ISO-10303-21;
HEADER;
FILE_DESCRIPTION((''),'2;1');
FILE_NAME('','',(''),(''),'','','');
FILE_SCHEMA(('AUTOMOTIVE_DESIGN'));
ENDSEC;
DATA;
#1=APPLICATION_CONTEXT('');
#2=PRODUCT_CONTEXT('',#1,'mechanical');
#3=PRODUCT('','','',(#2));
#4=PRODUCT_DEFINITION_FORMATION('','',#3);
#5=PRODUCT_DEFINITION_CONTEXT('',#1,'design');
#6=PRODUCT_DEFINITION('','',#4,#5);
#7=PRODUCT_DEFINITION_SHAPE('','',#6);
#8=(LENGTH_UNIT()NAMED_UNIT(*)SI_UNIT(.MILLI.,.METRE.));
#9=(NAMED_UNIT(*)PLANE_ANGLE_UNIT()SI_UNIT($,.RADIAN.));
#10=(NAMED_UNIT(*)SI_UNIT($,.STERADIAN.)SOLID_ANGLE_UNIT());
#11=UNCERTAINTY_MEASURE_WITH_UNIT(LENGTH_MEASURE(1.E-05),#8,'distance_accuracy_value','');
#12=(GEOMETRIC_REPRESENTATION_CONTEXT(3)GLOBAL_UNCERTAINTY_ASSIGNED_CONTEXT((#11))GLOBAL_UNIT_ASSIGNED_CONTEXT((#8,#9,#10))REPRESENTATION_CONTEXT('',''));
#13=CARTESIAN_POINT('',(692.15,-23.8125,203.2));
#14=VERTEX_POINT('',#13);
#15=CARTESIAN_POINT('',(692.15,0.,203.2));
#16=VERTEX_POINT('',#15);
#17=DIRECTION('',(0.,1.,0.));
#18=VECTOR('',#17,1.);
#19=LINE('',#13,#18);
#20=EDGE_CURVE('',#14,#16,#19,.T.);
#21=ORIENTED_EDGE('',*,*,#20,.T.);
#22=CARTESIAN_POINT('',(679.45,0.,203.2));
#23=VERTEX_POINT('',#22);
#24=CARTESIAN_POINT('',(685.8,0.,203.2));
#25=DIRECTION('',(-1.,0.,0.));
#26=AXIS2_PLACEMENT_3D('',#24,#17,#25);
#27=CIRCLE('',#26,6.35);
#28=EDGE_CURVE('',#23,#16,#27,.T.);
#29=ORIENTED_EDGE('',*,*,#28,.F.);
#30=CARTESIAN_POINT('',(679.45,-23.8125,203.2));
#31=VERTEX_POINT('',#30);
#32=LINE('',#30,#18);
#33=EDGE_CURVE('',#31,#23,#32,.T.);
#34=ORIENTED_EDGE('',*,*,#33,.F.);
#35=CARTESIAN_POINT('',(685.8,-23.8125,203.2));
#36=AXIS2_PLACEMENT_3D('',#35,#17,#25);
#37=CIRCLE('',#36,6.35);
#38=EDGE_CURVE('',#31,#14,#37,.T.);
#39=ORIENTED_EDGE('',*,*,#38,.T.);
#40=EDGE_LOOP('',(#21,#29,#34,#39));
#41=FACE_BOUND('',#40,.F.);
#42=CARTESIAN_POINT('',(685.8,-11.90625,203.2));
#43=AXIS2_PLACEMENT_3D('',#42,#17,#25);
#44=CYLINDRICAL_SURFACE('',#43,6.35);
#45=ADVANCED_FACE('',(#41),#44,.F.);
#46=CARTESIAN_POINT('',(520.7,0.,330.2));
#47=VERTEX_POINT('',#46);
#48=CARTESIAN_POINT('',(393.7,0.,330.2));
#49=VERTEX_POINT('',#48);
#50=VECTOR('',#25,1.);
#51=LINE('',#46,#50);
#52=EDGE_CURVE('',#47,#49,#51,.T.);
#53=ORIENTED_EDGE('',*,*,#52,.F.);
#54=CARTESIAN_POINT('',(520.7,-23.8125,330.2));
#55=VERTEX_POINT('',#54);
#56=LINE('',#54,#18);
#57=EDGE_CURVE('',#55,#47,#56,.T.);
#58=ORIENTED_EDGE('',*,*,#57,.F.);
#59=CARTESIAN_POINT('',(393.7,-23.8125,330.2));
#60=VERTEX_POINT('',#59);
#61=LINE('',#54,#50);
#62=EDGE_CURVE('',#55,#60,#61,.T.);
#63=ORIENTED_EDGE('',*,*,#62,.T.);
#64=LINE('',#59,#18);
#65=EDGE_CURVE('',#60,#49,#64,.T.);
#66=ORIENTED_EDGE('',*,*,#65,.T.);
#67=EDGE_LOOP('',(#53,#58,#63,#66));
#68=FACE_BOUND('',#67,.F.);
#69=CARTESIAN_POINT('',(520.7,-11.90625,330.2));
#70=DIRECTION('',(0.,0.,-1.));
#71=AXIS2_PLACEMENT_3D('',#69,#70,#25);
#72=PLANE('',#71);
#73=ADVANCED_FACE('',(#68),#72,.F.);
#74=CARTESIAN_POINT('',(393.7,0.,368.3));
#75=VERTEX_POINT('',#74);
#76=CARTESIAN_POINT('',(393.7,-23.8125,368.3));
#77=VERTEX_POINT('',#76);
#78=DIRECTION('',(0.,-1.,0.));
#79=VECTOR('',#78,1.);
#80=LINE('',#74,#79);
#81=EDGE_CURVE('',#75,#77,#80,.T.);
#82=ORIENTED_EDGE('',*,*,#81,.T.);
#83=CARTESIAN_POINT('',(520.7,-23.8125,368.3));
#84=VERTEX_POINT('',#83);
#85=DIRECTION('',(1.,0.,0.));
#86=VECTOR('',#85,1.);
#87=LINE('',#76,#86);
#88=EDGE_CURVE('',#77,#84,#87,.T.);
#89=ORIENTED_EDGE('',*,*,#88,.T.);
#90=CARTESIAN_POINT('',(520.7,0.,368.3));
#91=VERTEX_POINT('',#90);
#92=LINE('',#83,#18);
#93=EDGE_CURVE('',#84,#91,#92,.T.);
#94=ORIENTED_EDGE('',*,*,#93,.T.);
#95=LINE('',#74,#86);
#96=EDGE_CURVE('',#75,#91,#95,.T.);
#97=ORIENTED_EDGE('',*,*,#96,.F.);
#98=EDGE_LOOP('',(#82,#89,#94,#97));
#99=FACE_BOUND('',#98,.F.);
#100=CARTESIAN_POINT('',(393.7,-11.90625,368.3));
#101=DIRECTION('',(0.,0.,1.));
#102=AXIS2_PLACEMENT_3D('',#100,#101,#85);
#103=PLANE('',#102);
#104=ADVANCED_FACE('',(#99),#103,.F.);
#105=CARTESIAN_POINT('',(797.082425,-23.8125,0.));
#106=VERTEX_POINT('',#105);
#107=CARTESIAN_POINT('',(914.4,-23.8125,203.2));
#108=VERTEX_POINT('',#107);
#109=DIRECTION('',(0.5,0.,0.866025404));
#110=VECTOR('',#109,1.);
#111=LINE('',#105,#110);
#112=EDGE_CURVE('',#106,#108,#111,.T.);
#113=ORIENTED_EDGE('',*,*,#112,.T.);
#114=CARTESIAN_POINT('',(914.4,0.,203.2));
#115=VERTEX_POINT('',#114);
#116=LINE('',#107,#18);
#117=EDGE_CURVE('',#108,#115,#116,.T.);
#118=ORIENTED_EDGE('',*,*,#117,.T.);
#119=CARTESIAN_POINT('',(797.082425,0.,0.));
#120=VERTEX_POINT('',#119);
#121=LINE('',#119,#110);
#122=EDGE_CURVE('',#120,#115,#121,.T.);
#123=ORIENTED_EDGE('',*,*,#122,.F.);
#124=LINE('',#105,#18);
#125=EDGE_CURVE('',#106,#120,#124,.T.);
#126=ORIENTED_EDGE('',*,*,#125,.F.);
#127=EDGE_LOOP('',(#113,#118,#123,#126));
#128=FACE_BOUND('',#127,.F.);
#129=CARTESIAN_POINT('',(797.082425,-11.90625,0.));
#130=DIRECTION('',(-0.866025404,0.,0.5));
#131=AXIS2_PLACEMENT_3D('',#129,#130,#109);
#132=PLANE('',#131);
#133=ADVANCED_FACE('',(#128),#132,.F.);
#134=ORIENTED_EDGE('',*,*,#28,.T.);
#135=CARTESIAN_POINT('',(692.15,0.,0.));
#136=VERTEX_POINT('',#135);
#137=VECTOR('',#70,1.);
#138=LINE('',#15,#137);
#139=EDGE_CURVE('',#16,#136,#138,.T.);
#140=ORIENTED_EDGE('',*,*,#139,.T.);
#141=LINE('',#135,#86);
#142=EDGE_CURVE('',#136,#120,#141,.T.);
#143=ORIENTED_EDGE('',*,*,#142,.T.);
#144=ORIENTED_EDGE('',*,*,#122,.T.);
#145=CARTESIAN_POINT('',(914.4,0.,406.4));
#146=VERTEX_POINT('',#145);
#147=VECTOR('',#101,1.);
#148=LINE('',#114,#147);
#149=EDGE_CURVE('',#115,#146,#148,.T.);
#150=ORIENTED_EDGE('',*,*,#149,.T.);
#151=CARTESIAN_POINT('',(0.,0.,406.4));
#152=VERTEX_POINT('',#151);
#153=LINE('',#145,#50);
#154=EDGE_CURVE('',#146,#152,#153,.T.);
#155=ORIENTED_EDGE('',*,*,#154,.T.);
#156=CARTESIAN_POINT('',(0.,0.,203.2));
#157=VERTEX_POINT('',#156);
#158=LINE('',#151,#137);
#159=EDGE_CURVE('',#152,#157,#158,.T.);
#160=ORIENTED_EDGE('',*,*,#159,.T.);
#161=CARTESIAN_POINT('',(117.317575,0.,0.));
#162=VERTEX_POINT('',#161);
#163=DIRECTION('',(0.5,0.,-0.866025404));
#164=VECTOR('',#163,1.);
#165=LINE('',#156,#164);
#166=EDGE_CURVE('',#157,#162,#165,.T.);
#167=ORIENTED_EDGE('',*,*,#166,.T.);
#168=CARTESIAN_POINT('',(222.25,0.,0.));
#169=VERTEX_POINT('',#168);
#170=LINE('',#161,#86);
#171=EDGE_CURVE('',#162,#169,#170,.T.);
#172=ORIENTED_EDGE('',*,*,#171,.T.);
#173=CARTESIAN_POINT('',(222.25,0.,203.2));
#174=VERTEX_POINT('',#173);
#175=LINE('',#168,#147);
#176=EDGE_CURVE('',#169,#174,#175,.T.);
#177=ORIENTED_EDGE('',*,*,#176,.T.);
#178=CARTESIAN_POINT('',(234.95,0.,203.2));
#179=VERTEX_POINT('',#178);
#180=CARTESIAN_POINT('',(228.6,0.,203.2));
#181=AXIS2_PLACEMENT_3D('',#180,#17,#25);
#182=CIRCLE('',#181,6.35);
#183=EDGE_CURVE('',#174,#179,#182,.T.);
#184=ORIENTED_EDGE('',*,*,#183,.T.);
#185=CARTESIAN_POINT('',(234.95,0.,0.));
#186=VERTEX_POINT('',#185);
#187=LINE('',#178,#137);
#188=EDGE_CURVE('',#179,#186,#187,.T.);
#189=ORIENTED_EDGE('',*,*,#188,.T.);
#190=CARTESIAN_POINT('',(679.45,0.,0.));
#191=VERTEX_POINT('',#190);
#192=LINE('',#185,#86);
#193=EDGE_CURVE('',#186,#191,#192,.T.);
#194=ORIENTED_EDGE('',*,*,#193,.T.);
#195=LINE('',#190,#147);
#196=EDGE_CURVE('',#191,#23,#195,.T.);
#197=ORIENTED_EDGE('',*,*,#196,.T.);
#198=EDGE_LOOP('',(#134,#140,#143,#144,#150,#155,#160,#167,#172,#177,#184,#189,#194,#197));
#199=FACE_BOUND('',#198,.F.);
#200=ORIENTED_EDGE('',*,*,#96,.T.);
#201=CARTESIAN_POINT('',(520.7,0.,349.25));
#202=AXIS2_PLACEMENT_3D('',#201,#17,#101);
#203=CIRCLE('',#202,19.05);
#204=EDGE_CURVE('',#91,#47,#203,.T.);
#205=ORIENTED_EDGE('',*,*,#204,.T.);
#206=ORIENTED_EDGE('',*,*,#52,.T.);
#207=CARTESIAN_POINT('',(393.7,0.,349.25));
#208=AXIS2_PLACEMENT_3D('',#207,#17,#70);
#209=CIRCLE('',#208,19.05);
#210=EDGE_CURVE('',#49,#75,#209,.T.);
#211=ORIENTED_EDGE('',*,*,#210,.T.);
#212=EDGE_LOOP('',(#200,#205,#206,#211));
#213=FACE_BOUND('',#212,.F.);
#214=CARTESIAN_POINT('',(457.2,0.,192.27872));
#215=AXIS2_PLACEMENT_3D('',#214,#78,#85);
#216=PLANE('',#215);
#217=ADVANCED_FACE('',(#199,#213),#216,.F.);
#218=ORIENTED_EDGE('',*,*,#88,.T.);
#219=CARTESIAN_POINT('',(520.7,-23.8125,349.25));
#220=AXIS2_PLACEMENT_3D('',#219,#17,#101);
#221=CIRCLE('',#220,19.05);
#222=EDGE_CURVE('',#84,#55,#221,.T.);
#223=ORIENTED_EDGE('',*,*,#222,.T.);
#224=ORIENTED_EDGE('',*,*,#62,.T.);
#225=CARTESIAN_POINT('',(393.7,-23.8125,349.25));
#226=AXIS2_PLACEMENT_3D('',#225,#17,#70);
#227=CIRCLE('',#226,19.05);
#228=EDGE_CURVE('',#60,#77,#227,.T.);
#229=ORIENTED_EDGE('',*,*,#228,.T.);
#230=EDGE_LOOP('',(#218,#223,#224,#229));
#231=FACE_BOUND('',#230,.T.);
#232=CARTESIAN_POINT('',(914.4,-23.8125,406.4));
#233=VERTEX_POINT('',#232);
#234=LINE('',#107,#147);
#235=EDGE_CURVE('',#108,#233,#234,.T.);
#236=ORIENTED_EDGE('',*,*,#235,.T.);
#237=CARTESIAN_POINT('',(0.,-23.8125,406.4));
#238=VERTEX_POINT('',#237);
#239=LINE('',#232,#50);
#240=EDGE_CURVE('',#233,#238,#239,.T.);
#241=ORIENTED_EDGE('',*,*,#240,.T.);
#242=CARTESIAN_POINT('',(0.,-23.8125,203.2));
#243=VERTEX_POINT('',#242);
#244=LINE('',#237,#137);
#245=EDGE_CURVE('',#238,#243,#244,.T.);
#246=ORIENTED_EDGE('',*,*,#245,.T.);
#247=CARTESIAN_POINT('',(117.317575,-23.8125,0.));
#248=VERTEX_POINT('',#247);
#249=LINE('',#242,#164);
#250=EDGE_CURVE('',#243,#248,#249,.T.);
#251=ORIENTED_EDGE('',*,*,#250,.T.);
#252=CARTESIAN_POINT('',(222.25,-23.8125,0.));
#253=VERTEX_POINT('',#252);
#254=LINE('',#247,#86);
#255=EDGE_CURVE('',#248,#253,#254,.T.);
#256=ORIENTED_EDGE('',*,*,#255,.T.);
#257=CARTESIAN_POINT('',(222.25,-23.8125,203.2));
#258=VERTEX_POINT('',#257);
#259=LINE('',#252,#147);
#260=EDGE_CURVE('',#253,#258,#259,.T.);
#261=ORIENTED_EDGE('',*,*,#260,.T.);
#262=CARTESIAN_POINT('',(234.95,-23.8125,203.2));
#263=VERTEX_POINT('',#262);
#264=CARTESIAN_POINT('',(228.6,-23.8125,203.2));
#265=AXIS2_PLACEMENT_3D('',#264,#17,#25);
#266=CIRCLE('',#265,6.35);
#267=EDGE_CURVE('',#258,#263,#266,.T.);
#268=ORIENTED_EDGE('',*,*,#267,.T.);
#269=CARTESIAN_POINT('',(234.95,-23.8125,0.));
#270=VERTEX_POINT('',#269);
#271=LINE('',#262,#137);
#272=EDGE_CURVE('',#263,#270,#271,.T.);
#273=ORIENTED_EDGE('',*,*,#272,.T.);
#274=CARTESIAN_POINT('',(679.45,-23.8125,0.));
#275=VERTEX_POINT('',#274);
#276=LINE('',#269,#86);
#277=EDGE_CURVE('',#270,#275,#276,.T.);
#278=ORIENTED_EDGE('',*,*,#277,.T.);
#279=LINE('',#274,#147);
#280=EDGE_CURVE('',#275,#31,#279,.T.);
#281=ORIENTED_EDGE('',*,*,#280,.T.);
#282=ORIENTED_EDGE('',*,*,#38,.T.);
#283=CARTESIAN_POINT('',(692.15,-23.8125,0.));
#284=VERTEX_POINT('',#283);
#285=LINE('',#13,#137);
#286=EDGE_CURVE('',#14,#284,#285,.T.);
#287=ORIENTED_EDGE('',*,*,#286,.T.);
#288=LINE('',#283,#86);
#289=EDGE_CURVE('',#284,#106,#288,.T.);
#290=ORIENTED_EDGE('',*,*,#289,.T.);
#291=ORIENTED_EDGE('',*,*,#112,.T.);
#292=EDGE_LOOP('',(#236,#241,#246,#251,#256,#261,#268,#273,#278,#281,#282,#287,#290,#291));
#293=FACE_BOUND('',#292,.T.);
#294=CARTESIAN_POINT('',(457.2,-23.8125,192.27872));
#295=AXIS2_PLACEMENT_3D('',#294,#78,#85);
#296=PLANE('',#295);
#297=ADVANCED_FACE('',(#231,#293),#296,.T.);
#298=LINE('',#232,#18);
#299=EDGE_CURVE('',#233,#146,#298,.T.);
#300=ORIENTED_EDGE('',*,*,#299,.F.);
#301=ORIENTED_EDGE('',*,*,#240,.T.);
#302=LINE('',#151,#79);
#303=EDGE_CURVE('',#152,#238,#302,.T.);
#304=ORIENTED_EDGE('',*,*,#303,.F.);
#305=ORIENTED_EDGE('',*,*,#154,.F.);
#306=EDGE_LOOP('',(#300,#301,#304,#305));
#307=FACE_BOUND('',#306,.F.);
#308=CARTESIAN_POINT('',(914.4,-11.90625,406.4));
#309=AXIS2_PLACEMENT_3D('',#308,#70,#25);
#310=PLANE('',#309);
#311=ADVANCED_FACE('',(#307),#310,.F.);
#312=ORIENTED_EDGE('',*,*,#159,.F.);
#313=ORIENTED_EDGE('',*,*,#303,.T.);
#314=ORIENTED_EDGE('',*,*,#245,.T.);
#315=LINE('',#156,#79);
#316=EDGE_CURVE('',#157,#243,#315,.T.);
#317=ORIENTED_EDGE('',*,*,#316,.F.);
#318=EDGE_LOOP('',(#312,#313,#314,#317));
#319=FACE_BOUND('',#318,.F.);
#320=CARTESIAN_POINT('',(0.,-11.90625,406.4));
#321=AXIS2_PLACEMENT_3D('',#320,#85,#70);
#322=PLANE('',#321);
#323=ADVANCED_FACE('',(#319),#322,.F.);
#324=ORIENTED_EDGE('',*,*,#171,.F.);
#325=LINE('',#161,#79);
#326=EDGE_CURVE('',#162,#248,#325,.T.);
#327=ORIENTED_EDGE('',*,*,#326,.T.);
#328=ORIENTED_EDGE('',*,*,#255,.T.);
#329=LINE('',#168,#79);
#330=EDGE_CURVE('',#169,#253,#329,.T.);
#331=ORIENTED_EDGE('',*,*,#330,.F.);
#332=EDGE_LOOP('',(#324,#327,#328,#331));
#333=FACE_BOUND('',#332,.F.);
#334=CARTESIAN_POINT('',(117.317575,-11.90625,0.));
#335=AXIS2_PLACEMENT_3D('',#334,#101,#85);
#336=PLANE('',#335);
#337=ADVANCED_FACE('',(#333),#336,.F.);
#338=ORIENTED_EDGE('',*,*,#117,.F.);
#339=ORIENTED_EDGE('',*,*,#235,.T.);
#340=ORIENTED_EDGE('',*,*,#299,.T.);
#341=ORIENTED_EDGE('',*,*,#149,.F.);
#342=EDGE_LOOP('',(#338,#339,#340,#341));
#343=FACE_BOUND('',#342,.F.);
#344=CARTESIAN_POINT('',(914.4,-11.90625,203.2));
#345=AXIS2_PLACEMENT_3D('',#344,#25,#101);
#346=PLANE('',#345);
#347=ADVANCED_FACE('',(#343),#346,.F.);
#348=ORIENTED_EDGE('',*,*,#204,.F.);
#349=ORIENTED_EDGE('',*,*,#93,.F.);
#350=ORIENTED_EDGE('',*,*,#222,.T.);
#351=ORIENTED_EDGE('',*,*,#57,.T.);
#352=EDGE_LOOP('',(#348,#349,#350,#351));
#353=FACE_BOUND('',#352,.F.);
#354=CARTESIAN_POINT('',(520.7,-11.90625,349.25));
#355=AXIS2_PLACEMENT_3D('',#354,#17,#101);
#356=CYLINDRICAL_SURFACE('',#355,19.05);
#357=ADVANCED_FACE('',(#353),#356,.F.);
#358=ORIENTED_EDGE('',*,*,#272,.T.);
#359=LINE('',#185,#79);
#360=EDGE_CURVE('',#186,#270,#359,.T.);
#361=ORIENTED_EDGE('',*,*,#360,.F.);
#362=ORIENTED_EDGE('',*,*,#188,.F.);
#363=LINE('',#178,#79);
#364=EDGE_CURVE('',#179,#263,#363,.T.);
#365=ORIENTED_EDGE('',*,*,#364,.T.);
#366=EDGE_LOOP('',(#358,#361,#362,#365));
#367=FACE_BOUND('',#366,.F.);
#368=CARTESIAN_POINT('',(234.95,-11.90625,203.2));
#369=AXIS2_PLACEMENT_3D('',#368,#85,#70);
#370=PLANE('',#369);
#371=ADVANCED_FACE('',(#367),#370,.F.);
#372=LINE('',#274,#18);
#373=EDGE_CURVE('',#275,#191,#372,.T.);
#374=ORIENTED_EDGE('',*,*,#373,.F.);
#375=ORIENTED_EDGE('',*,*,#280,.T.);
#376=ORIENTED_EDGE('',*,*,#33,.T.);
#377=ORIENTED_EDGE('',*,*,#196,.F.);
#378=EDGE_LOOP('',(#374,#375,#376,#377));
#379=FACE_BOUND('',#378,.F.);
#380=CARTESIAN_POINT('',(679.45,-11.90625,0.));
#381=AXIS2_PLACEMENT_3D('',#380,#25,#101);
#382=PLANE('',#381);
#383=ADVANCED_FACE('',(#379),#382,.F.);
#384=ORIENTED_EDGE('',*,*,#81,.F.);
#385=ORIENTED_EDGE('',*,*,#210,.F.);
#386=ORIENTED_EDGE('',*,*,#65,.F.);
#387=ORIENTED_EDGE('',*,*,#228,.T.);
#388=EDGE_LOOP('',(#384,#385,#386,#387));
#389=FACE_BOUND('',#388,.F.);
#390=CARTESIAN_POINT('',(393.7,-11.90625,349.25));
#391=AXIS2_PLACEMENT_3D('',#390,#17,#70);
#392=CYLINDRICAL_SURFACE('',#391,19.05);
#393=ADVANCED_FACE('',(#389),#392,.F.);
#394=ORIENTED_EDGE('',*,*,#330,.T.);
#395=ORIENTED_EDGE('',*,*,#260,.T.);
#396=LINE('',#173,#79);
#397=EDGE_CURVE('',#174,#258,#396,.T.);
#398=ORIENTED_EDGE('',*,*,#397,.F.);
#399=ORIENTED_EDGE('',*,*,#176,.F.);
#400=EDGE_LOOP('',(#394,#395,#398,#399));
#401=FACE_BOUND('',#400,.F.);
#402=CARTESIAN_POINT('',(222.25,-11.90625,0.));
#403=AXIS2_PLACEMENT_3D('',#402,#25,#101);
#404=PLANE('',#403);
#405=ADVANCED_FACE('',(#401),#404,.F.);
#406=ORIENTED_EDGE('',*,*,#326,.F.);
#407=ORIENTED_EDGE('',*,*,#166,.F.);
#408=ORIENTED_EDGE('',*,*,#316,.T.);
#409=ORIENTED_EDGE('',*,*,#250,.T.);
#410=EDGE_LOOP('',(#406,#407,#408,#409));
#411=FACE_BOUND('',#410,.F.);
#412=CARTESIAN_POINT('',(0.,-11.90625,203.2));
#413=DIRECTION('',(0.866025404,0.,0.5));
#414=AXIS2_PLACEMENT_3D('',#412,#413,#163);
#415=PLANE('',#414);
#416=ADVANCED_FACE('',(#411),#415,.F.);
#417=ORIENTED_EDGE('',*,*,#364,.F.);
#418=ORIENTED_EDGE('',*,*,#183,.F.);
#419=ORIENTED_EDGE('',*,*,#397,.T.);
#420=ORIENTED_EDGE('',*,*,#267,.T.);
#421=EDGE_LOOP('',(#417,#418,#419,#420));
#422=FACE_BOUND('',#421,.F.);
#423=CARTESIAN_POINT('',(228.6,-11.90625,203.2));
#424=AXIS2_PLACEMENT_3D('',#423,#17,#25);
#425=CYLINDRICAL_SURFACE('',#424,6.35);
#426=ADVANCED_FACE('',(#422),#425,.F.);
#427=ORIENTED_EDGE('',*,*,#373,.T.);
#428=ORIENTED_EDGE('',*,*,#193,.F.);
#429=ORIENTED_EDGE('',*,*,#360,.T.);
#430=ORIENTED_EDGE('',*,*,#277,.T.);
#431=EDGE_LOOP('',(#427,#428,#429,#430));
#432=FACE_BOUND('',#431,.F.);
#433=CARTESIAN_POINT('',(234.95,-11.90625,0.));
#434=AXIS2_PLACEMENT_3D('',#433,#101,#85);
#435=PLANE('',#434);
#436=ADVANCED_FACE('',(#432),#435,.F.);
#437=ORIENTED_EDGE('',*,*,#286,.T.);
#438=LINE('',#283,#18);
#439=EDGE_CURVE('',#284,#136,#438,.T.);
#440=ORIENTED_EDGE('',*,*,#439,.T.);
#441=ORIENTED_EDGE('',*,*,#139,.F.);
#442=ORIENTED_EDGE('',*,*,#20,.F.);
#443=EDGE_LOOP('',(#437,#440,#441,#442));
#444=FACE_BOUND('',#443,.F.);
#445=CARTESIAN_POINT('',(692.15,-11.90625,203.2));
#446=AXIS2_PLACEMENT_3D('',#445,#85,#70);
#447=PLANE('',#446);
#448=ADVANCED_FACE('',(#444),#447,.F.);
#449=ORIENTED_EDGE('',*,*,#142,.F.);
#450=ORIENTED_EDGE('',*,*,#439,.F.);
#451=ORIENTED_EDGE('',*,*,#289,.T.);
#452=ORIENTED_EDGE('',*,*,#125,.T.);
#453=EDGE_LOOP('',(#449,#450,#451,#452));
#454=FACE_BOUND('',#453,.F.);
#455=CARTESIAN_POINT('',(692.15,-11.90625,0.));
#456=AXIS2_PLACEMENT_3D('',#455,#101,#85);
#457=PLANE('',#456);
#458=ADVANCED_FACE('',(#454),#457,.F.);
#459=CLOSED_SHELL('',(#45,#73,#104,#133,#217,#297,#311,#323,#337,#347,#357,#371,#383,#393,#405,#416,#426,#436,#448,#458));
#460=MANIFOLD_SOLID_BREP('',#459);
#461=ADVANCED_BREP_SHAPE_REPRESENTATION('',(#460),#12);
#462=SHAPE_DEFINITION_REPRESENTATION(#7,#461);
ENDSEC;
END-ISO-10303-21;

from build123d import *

# Parameters (mm, degrees)
F2_DEPTH = 11.90625
F3_DEPTH = 11.90625


# Not quite as in the source:
# - a variable given as a bare number and used for a length is read in inches; the dataset says mm whatever the document's units were


with BuildPart() as f2:
    # F1 (on Front) → F2 (new body)
    with BuildSketch(Plane.XZ):
        with BuildLine():
            Line((914.4, 406.4), (0, 406.4))
            Line((0, 406.4), (0, 203.2))
            Line((0, 203.2), (117.3175746993, 0))
            Line((117.3175746993, 0), (222.25, 0))
            Line((222.25, 0), (222.25, 203.2))
            ThreePointArc((222.25, 203.2), (228.6, 209.55), (234.95, 203.2))
            Line((234.95, 203.2), (234.95, 0))
            Line((234.95, 0), (679.45, 0))
            Line((679.45, 0), (679.45, 203.2))
            ThreePointArc((679.45, 203.2), (685.8, 209.55), (692.15, 203.2))
            Line((692.15, 203.2), (692.15, 0))
            Line((692.15, 0), (797.0824253007, 0))
            Line((797.0824253007, 0), (914.4, 203.2))
            Line((914.4, 203.2), (914.4, 406.4))
        make_face()
        with BuildLine():
            Line((393.7, 368.3), (457.2, 368.3))
            Line((457.2, 368.3), (520.7, 368.3))
            ThreePointArc((520.7, 368.3), (539.75, 349.25), (520.7, 330.2))
            Line((520.7, 330.2), (457.2, 330.2))
            Line((457.2, 330.2), (393.7, 330.2))
            ThreePointArc((393.7, 330.2), (374.65, 349.25), (393.7, 368.3))
        make_face(mode=Mode.SUBTRACT)
    extrude(amount=F2_DEPTH)

    # F3 (add): a face of the model
    f3_faces = [f2.faces().sort_by_distance(p)[0] for p in [
        (457.2, -11.90625, 211.7591892525),
    ]]
    extrude(f3_faces, amount=F3_DEPTH)


solid = f2.part
